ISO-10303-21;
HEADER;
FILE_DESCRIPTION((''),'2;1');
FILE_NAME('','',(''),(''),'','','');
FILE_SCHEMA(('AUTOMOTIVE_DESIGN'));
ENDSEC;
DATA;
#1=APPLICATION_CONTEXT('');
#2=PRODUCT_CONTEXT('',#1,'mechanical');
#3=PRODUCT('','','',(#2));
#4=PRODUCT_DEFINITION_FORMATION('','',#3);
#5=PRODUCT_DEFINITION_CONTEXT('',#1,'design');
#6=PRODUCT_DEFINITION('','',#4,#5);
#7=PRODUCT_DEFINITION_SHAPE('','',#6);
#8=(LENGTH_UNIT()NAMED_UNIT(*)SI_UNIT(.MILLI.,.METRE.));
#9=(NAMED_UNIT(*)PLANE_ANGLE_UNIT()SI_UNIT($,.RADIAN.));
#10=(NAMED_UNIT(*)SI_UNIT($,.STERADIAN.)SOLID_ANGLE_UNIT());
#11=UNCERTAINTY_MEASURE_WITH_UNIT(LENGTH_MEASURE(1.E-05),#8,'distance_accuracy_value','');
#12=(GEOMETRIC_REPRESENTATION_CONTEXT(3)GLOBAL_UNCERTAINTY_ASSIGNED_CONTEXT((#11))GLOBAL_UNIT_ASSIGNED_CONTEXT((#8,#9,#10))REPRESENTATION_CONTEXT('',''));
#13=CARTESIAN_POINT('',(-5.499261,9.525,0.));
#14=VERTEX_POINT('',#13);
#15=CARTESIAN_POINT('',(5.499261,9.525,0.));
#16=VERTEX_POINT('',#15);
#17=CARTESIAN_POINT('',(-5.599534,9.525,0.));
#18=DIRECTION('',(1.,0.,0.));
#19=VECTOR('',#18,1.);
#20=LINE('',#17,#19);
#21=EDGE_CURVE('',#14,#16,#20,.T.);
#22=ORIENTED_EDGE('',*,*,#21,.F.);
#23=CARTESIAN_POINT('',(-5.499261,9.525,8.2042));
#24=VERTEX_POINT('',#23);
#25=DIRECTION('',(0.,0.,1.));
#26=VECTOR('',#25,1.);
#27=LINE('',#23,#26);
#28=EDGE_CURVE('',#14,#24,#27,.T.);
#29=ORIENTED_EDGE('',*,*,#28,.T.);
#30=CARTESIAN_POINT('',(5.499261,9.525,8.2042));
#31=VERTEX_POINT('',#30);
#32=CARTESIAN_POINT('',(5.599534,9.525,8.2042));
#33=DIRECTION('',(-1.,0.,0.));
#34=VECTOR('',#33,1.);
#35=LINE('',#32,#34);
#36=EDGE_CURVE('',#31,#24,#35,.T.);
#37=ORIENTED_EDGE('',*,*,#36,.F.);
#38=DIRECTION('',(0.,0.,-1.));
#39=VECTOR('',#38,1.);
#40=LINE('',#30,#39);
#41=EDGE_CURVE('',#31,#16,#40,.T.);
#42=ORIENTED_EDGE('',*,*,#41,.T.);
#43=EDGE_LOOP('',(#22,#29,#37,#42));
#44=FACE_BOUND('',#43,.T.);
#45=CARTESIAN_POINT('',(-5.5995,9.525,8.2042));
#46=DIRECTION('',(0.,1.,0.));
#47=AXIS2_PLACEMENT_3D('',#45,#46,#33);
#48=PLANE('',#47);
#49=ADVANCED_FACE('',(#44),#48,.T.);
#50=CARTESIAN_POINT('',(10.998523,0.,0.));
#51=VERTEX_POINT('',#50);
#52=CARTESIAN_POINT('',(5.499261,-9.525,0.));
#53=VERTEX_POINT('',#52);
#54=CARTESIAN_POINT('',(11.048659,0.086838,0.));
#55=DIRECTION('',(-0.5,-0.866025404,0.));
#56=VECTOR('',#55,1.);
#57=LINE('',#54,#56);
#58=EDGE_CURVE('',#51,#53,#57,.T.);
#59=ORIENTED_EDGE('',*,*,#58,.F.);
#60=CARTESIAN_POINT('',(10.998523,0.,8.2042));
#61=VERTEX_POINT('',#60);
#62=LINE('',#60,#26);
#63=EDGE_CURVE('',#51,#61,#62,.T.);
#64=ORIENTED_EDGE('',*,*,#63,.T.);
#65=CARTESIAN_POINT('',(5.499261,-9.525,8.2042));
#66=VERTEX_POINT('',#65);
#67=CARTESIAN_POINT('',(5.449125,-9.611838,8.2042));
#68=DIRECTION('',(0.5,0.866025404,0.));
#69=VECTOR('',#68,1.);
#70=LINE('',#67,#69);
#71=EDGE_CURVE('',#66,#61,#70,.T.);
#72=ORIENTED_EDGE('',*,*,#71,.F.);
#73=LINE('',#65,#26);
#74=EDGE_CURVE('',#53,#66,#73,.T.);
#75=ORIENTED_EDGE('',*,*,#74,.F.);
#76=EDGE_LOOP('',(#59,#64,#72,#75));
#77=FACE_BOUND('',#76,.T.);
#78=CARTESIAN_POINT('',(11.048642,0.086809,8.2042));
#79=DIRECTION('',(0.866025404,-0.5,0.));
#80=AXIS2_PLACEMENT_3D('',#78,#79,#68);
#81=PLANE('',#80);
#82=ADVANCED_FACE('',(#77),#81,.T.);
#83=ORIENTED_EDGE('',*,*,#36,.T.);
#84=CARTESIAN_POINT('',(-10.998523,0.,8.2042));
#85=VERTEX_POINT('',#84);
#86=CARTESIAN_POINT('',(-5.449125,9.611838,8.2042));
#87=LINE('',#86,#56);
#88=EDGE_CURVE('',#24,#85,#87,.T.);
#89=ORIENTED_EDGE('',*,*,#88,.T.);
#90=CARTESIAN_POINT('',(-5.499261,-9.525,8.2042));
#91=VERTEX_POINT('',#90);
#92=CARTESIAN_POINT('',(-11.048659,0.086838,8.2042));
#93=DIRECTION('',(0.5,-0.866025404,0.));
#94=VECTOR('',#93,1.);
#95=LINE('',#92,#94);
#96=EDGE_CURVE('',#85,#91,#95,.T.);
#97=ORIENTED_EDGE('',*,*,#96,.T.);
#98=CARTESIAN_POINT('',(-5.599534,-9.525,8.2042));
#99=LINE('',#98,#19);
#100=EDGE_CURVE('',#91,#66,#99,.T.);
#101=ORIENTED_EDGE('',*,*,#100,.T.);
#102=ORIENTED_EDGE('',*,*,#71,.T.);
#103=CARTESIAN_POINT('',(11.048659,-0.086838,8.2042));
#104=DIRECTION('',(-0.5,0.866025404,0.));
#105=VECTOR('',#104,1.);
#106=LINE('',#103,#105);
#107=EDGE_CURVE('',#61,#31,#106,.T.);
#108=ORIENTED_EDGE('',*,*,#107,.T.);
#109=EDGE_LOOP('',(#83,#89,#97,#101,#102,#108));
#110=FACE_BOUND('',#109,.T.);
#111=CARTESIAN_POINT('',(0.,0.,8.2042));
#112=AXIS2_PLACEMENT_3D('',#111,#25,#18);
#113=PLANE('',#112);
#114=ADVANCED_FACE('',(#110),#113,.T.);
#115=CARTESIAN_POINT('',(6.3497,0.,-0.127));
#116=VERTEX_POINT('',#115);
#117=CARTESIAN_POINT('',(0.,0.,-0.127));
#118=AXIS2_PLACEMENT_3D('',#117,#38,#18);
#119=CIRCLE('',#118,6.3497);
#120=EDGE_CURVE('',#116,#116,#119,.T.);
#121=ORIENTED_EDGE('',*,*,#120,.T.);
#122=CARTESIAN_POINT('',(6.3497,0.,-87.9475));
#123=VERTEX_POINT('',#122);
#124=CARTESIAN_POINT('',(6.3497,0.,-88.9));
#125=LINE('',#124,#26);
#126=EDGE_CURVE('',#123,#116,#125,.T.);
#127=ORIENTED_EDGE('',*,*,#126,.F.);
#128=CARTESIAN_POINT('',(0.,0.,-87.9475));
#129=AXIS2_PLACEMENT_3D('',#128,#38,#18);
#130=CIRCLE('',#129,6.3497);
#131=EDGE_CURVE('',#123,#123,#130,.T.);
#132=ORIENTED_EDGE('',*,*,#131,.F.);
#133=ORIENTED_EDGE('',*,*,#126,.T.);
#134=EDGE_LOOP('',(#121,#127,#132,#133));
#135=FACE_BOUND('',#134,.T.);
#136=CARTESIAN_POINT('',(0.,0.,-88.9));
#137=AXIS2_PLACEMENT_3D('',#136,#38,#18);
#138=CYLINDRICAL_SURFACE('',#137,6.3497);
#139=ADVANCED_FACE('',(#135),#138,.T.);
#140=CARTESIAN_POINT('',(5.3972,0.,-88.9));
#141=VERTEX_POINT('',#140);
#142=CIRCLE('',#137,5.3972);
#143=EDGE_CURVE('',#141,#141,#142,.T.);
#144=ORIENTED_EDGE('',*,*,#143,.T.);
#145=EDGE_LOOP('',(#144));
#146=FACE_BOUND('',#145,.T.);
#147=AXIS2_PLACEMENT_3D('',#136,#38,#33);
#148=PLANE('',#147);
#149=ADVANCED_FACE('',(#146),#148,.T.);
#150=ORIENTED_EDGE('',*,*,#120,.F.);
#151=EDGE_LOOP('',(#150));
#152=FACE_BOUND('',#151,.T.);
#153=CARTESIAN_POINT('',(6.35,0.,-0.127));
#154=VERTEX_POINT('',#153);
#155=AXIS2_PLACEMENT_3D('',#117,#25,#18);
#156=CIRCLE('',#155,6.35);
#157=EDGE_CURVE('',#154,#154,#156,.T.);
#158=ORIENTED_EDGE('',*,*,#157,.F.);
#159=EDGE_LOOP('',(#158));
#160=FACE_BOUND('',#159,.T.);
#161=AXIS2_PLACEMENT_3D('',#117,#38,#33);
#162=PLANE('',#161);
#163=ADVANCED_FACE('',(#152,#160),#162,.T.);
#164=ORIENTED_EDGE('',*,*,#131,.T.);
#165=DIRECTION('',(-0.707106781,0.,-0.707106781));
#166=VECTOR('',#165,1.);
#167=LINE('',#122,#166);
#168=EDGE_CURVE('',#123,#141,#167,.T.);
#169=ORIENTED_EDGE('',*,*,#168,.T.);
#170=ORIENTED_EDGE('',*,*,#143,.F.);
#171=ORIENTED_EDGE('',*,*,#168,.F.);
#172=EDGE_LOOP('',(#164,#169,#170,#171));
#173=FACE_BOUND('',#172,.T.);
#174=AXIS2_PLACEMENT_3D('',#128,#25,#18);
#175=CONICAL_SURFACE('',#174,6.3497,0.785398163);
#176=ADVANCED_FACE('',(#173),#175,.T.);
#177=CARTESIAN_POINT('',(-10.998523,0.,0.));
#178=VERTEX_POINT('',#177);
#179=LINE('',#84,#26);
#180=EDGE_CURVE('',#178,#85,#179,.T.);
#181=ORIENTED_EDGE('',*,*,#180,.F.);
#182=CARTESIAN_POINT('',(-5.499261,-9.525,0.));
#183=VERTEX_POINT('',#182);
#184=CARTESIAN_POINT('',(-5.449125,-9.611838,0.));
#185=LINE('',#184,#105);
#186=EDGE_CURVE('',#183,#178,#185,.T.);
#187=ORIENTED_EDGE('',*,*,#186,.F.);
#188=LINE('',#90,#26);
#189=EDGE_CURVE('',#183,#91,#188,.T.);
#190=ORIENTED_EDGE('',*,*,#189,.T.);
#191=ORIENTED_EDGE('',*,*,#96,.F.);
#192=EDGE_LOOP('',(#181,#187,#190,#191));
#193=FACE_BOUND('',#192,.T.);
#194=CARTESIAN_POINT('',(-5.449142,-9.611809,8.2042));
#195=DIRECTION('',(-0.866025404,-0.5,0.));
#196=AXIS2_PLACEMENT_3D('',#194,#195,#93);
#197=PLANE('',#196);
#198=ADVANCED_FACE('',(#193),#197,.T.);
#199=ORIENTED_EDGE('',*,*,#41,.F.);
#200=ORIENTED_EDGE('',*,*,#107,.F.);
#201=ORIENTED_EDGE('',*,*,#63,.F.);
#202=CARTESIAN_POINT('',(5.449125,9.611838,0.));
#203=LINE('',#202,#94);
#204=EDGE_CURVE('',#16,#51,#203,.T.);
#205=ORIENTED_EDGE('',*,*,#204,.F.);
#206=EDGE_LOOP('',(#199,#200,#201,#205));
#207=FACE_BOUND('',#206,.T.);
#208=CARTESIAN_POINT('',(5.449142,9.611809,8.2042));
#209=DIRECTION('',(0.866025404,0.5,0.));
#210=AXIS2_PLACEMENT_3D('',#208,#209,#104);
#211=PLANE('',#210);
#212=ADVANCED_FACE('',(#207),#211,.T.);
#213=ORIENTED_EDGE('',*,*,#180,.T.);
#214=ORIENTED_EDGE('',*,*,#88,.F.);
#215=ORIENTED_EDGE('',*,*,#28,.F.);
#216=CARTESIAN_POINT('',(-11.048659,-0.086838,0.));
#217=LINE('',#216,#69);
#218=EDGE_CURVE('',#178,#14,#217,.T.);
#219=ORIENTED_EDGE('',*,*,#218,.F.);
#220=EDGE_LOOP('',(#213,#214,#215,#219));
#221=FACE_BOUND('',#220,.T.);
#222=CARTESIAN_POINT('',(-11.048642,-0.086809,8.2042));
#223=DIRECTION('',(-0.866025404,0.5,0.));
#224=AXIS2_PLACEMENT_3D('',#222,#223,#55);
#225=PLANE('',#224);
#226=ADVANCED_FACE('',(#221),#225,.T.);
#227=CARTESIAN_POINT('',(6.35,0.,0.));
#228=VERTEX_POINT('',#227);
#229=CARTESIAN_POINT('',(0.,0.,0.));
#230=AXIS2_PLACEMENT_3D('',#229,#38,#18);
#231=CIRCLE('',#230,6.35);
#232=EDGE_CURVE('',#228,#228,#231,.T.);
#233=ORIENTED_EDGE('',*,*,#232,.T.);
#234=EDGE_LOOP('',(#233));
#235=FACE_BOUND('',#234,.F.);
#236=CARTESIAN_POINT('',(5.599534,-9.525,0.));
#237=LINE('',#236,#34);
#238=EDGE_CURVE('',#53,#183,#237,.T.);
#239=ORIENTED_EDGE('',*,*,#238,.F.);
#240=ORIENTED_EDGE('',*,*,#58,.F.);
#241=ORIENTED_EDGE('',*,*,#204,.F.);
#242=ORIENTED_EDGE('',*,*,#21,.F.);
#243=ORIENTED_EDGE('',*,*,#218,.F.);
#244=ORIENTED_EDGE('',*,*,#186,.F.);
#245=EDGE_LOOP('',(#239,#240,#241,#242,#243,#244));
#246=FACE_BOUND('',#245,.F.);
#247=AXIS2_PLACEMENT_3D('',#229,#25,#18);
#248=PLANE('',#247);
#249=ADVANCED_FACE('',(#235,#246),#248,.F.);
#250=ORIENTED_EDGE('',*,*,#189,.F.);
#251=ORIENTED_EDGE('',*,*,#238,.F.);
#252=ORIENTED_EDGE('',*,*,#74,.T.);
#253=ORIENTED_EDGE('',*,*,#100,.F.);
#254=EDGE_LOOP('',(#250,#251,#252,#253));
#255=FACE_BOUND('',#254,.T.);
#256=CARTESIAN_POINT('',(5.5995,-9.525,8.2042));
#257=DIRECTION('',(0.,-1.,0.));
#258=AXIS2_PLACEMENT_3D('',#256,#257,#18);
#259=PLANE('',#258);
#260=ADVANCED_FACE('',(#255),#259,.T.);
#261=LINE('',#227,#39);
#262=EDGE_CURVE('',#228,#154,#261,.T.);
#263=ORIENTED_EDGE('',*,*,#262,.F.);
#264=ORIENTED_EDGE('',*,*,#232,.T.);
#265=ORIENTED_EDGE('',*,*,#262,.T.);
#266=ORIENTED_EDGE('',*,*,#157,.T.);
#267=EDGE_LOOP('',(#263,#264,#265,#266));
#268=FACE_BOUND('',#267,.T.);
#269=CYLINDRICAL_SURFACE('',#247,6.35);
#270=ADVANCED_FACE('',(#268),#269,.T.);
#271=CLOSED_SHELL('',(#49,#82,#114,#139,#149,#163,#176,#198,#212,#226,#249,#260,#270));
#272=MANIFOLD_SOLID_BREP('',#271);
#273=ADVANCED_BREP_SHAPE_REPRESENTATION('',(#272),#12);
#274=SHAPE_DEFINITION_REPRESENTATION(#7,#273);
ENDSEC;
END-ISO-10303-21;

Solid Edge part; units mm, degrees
sketch "Sketch1" plane through (0, 0, 0) normal (0, 0, 1) x (1, 0, 0)
  circle A0 centre (0, 0) radius 11.049
  dimension "D1" = 22.098
extrude "Protrusion1" add sketch "Sketch1" along normal blind 8.2042
sketch "Sketch2" plane through (0, 0, 0) normal (0, 0, -1) x (1, 0, 0)
  circle A0 centre (0, 0) radius 6.35
extrude "Protrusion2" add sketch "Sketch2" along normal blind 88.9
sketch "Sketch3" plane through (0, 0, -88.9) normal (0, 0, -1) x (1, 0, 0)
  circle A0 centre (0, 0) radius 6.3497
extrude "Cutout1" cut sketch "Sketch3" against normal blind 88.773 flip side to cut
chamfer "Chamfer_1" distance 0.9525 angle 45 1 edges at (-6.3497, 0, -88.9)
sketch "Sketch4" plane through (0, 0, 8.2042) normal (0, 0, 1) x (1, 0, 0)
  line L0 (-5.5995, 9.525) -> (5.5995, 9.525)
  dimension "D1" = 19.05
extrude "Cutout2" cut sketch "Sketch4" against normal up to next material side at (0, 9.575, 8.2042)
pattern_circular "Pattern1" count 6 over 360 about axis through (0, 0, 8.2042) along (0, 0, 1) of "Cutout2"
properties part number "183743"
